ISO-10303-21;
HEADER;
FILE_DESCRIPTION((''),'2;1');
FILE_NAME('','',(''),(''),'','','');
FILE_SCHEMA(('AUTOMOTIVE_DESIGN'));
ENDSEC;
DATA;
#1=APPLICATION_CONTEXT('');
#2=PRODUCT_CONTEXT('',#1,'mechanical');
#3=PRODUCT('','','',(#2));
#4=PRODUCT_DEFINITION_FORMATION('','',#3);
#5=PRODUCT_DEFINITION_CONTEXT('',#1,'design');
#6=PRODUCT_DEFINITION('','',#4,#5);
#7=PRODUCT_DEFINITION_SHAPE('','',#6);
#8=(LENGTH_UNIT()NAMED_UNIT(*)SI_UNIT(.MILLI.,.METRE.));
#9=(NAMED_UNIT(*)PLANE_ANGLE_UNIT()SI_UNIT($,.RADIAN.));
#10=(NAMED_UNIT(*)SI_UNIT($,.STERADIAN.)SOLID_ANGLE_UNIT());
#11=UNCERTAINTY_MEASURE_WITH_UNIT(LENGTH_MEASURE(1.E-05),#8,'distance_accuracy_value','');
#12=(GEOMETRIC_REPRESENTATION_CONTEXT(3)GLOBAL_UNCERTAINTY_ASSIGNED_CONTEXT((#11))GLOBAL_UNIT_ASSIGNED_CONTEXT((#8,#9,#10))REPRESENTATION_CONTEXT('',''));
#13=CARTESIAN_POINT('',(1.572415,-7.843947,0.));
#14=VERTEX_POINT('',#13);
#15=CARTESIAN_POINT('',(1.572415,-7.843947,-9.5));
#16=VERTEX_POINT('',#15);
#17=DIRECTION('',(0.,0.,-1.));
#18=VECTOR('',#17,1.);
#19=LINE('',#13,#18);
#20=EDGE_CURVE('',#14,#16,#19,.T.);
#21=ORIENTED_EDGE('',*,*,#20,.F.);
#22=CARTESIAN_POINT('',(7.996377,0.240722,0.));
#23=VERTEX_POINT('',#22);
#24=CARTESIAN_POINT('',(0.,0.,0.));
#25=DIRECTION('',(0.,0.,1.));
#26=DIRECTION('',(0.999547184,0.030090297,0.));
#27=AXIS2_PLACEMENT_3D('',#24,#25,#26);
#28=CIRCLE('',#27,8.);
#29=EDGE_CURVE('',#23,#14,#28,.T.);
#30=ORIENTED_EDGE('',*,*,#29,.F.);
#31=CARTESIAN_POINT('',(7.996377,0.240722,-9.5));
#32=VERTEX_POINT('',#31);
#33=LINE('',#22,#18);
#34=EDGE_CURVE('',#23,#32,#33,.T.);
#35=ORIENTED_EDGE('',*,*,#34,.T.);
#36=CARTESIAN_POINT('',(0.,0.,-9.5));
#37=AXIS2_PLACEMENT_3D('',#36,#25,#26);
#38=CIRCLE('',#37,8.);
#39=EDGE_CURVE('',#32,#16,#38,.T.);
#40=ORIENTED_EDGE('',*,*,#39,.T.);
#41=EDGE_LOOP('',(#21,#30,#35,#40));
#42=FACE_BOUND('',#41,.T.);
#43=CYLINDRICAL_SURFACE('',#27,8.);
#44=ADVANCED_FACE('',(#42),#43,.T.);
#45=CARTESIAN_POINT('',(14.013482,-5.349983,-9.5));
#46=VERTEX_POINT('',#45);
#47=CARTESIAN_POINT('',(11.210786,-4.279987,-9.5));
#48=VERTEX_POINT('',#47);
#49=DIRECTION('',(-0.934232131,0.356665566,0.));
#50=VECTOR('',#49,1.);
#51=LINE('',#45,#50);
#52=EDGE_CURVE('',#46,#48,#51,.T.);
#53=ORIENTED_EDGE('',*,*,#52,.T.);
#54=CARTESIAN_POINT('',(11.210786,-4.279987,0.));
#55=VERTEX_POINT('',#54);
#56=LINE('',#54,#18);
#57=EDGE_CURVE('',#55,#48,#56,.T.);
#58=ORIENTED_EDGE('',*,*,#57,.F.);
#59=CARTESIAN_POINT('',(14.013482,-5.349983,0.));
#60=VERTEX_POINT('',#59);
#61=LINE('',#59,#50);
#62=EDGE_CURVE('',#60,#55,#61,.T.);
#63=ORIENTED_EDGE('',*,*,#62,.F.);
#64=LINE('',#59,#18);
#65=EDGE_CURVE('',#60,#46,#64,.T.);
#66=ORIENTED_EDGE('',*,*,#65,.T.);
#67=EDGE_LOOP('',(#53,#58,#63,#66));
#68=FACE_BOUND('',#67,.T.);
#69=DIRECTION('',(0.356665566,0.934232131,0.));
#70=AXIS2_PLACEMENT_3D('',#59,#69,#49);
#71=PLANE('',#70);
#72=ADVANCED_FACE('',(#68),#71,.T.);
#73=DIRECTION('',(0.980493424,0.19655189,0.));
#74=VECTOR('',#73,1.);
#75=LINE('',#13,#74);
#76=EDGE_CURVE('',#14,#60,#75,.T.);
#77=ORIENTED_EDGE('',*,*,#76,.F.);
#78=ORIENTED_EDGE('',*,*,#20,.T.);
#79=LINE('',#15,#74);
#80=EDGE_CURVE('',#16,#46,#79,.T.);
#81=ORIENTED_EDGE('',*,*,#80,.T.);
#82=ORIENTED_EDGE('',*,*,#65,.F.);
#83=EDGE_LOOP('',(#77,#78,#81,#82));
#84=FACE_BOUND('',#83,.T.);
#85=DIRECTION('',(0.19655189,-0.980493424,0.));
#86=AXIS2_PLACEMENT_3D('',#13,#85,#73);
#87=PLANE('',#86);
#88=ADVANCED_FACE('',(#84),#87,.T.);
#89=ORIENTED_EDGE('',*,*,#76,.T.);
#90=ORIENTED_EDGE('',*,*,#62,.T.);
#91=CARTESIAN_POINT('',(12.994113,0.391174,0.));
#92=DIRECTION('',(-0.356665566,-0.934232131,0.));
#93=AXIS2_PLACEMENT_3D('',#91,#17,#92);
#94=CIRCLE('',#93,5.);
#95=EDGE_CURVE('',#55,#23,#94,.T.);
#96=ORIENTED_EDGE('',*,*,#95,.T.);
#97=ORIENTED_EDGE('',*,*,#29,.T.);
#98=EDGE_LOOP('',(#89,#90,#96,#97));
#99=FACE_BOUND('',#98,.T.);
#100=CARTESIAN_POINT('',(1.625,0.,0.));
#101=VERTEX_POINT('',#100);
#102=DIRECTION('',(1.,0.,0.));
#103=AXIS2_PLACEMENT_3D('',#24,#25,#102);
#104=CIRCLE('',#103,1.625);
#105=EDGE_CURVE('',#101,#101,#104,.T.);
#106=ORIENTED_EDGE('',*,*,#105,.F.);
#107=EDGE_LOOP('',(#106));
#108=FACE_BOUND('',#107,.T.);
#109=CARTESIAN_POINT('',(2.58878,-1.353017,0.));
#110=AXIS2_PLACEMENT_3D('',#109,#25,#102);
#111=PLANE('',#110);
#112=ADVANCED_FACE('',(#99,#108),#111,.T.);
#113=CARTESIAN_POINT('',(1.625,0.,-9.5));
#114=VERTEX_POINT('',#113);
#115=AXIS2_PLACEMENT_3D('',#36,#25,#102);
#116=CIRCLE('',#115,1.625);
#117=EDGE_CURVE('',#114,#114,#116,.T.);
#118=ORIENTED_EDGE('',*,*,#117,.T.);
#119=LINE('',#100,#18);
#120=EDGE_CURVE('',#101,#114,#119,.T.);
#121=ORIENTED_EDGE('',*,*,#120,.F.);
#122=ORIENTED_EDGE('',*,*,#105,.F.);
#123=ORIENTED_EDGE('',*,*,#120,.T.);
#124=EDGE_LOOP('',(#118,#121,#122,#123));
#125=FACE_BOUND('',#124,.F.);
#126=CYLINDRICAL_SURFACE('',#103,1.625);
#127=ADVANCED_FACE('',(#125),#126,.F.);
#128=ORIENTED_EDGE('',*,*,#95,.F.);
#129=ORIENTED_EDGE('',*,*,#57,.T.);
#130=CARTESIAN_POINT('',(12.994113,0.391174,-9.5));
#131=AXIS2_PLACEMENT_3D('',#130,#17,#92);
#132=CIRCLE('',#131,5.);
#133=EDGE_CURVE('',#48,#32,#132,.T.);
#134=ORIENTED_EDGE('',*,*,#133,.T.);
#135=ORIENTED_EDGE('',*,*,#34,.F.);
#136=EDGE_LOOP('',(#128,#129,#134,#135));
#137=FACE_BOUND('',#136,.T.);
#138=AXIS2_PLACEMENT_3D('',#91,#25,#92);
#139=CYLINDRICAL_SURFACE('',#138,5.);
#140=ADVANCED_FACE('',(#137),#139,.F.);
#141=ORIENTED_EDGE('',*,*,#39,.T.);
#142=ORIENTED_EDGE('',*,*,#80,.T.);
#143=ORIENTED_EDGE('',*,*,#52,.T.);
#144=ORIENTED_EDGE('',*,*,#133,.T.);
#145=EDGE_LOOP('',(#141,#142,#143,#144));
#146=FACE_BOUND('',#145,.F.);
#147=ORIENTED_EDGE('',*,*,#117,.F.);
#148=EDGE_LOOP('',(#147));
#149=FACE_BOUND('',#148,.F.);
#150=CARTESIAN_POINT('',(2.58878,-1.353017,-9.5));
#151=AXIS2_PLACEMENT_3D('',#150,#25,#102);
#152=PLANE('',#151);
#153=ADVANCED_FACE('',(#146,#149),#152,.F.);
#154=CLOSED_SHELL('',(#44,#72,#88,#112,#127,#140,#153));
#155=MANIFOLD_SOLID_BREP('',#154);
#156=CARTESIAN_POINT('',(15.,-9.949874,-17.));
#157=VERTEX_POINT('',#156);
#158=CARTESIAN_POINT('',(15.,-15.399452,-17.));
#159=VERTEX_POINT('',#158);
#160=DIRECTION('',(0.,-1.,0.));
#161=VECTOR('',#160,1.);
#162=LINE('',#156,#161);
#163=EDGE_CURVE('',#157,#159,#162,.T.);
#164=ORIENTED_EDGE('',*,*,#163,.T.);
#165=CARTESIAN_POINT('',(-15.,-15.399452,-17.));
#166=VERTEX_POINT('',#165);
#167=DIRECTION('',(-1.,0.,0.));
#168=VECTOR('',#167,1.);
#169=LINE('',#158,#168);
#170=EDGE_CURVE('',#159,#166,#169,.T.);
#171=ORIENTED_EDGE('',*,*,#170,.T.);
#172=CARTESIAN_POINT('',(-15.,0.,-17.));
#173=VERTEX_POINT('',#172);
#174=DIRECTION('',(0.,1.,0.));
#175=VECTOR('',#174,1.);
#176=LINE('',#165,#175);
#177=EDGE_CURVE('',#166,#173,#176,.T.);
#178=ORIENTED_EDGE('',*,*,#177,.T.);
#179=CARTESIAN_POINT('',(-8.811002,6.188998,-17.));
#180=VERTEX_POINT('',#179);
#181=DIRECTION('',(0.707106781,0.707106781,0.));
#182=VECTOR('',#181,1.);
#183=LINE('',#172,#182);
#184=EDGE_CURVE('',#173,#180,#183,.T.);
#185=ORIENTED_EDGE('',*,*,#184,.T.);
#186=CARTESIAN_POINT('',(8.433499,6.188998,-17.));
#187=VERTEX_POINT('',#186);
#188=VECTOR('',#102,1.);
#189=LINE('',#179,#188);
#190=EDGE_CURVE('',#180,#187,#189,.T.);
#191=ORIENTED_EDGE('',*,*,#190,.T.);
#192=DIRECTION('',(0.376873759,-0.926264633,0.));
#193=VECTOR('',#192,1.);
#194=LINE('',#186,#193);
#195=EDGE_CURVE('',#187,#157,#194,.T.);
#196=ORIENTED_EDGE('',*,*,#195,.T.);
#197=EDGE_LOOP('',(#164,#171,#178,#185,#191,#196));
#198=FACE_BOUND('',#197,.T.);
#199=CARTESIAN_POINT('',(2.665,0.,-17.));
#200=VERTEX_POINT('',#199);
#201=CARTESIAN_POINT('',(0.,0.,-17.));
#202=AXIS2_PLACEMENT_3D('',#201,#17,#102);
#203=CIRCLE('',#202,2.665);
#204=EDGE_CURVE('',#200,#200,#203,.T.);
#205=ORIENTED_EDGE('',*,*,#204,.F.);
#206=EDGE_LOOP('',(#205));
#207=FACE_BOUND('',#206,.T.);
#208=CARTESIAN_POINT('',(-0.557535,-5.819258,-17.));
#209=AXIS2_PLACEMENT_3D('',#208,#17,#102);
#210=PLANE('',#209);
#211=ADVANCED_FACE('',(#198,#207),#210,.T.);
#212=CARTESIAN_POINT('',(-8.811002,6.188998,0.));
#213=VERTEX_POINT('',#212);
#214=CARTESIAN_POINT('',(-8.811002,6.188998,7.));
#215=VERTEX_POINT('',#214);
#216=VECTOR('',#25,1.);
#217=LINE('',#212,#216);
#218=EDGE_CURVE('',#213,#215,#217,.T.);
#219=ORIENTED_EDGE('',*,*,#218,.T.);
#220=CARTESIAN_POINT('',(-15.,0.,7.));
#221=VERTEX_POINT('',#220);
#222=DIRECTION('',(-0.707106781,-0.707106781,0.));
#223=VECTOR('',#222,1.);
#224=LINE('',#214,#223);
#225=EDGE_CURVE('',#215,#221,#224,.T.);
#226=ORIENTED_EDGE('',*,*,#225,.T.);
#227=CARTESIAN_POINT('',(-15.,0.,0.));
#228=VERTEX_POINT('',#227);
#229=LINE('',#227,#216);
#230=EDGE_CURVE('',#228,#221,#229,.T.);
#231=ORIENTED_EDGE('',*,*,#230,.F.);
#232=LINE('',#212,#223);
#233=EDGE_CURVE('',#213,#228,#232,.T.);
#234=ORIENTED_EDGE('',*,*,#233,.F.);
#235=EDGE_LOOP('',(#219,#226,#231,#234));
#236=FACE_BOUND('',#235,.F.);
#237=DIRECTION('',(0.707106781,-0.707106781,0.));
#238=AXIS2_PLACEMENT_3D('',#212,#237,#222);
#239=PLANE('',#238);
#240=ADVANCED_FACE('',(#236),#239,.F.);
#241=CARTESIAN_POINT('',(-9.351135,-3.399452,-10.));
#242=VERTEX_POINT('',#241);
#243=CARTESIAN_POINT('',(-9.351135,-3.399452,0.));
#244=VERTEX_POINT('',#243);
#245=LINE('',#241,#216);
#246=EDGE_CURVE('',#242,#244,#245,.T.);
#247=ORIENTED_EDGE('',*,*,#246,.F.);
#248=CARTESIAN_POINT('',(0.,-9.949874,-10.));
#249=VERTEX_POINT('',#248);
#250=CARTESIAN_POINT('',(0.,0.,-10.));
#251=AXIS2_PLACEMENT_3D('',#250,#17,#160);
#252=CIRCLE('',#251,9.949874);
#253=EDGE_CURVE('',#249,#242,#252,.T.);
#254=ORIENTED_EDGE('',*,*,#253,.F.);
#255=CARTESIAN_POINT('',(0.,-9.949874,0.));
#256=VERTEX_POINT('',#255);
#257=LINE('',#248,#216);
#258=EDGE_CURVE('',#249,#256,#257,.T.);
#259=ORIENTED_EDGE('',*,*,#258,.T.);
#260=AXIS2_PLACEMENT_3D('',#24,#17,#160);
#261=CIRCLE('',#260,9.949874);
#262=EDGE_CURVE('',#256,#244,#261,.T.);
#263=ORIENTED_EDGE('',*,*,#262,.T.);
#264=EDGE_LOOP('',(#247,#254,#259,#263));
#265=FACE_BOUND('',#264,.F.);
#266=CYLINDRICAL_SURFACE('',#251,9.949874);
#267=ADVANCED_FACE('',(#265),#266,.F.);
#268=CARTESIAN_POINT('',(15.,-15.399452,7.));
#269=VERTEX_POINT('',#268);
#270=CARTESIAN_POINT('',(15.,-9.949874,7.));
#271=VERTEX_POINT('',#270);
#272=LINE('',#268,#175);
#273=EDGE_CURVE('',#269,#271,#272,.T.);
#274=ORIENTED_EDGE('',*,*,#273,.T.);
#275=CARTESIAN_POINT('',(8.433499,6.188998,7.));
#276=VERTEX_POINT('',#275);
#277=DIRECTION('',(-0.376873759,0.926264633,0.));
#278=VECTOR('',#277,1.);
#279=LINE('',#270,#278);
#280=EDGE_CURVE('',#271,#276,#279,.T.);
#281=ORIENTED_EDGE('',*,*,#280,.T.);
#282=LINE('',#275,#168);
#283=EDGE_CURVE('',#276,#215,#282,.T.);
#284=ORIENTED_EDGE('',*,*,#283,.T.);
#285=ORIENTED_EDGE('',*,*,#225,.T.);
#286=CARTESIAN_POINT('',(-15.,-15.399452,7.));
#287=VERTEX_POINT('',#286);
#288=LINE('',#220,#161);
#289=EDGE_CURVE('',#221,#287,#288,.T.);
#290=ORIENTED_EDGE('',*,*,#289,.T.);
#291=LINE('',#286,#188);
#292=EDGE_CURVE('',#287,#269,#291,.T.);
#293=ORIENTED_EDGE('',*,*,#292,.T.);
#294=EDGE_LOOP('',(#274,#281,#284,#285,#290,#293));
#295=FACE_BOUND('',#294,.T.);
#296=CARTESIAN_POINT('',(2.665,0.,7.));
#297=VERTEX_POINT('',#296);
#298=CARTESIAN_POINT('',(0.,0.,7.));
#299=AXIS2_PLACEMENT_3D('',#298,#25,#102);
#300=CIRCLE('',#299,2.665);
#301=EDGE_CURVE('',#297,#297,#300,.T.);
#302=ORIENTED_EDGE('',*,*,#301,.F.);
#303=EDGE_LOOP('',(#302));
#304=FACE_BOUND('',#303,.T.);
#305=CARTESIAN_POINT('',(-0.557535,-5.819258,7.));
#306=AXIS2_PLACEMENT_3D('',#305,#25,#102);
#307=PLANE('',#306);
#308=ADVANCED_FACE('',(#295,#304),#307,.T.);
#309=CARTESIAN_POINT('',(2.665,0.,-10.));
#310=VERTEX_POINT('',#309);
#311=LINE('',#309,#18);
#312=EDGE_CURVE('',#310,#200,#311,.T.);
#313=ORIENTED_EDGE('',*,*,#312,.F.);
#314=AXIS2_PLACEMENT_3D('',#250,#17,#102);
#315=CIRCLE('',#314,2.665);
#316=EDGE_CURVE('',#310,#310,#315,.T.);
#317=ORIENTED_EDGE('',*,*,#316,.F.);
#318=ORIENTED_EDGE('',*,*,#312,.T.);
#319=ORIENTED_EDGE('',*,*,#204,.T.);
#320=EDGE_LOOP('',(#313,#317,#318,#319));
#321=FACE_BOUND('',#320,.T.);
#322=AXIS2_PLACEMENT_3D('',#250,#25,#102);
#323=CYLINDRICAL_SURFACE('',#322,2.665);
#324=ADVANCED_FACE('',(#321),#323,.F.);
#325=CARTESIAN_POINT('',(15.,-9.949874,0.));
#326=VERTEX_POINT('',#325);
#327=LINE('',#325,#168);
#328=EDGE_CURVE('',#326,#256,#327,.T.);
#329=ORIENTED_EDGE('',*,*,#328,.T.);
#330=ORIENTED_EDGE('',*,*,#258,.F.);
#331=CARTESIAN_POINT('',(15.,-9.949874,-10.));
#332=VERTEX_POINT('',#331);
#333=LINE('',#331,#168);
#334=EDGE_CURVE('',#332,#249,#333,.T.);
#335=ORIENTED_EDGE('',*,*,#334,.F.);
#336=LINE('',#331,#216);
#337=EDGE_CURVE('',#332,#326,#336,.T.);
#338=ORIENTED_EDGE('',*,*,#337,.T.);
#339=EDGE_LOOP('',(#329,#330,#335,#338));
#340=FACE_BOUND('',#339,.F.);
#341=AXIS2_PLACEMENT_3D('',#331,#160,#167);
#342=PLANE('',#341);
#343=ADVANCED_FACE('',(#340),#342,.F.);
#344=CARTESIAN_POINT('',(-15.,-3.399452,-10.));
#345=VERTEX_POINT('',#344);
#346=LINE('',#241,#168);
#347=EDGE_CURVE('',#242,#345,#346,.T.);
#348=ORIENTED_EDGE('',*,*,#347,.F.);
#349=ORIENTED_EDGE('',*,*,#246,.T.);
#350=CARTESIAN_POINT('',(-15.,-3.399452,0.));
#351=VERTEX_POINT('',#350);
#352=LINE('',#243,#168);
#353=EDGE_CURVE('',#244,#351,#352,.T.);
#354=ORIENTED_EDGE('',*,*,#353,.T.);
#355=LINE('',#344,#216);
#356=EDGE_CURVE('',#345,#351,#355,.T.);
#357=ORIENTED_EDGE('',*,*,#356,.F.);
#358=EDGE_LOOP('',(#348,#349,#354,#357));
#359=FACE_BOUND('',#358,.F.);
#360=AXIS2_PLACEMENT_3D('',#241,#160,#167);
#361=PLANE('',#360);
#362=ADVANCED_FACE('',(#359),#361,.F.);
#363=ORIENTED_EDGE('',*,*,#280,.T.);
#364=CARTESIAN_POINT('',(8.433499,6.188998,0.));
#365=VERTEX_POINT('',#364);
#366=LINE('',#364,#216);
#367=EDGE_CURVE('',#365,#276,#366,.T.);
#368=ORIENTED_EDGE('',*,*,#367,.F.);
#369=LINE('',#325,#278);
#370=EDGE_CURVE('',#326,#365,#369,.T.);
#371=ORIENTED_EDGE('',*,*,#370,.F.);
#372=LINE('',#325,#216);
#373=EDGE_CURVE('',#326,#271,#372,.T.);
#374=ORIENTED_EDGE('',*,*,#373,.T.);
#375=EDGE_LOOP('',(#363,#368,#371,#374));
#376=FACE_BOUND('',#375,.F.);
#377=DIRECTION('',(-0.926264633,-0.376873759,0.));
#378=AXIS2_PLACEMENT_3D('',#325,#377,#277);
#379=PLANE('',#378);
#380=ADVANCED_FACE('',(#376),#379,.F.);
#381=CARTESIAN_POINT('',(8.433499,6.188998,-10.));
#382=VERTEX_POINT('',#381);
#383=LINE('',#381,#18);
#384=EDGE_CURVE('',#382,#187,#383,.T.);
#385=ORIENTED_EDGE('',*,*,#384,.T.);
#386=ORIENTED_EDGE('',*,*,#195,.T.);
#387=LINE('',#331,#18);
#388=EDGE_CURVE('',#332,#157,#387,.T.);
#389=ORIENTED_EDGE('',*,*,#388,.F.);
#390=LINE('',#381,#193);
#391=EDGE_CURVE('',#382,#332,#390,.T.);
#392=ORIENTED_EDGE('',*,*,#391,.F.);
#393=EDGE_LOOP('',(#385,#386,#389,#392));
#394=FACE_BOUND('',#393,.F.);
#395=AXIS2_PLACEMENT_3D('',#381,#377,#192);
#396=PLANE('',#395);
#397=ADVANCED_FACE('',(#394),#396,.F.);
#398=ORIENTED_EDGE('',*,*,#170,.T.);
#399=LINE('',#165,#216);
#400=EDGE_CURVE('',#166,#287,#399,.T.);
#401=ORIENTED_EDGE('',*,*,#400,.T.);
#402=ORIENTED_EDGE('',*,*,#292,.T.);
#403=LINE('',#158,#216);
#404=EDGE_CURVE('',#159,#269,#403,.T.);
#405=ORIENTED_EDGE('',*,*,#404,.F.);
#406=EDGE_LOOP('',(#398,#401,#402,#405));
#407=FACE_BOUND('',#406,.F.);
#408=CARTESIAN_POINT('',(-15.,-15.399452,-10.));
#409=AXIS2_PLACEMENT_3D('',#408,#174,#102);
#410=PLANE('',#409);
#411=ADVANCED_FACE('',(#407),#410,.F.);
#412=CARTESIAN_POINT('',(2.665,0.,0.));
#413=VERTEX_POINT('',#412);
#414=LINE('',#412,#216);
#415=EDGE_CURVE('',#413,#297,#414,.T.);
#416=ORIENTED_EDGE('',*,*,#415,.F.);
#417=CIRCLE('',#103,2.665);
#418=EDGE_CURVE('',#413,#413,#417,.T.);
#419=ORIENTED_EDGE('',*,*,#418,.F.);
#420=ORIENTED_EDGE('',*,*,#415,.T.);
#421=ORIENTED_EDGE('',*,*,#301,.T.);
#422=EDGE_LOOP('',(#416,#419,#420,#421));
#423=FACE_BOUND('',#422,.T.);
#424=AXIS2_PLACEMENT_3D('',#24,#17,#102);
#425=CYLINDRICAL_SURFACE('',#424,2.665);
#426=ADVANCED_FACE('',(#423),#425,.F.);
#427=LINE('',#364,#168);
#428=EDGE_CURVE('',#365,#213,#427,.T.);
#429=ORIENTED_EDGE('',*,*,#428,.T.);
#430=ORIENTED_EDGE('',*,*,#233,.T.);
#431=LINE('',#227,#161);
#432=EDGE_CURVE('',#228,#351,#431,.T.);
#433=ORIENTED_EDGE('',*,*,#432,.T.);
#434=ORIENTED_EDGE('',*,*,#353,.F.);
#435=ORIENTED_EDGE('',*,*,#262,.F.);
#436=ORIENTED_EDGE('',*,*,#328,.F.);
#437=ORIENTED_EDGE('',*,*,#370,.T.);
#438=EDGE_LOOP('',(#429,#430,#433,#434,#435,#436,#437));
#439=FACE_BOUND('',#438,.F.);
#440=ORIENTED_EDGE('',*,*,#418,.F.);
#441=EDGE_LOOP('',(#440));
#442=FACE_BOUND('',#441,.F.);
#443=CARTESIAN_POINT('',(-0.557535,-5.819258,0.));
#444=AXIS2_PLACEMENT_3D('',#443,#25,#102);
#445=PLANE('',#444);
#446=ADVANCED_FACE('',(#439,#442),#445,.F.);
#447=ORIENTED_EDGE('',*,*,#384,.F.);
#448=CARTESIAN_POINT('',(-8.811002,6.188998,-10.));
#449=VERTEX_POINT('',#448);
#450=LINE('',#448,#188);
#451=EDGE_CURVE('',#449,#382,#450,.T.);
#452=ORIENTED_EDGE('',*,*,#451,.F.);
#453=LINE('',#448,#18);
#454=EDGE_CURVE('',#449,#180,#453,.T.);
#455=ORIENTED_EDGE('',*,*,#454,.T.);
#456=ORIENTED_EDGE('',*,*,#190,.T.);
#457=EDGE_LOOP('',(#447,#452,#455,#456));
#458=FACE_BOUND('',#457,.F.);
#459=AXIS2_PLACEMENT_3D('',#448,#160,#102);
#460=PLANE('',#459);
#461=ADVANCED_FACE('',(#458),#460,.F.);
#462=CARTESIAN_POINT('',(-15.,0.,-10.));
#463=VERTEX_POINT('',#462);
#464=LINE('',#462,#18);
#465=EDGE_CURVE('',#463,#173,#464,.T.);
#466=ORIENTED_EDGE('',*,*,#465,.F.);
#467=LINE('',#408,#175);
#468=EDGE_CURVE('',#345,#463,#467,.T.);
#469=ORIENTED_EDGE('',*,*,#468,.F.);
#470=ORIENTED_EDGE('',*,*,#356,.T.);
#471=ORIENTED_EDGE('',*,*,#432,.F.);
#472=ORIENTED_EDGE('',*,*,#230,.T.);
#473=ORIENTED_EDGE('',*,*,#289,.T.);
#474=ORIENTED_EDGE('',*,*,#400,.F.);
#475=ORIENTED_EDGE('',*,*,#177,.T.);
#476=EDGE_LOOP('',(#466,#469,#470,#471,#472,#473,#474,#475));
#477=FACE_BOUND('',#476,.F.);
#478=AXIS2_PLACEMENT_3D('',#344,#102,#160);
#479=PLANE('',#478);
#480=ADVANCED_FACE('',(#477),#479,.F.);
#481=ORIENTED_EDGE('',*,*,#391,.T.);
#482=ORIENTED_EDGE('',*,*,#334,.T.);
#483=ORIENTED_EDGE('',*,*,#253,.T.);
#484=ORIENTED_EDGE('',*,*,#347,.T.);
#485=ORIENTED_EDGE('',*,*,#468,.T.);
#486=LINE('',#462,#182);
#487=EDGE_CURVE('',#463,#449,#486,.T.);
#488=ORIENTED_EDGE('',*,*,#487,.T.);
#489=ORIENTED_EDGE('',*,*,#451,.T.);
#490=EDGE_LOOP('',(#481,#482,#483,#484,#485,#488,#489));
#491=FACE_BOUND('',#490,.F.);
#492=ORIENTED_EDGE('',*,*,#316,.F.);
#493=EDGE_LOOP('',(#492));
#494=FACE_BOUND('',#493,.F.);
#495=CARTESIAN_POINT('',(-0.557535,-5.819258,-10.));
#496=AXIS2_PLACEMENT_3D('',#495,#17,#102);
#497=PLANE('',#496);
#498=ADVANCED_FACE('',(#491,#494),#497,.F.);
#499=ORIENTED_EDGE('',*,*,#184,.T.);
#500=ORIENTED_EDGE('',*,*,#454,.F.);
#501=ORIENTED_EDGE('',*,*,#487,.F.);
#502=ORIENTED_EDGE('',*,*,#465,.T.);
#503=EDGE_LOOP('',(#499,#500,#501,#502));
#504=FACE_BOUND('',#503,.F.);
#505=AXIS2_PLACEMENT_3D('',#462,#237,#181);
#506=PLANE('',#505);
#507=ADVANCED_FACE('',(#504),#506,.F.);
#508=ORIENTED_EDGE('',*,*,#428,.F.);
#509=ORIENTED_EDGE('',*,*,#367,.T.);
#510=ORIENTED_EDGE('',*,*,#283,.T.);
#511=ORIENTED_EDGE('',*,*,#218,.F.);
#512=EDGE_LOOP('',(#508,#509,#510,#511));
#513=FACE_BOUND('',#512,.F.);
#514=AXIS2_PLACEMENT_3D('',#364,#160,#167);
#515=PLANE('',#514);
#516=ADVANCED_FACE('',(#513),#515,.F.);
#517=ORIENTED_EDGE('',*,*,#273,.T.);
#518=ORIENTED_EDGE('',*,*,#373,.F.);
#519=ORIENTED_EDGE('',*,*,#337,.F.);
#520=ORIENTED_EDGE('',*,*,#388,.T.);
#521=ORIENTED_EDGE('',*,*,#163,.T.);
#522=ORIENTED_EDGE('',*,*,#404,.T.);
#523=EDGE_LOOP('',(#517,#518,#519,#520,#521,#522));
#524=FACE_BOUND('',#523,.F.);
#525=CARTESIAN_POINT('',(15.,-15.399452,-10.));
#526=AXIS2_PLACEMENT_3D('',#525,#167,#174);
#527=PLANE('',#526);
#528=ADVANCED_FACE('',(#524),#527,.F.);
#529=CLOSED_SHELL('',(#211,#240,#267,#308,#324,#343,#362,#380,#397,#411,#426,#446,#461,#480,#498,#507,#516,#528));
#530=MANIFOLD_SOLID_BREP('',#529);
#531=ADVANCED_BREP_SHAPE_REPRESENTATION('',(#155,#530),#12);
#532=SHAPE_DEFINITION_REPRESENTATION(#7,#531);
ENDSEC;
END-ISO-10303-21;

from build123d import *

# Parameters (mm, degrees)
F1_R      = 4.2
F1_R_2    = 2.665
F3_DEPTH  = 7
F5_R      = 2.665
F6_DEPTH  = 7
F2_R      = 1.625
F7_DEPTH  = 9.5
F10_DEPTH = 10


# Not quite as in the source:
# - the program builds the solid bodies; features that only make, move or delete a surface that nothing else refers to are left out


with BuildPart() as f3:
    # F1 (on Top) → F3 (new body)
    with BuildSketch(Plane.XY):
        Polygon((-8.8110024968, 6.1889975032), (-15, 0), (-15, -15.3994522989), (15, -15.3994522989), (15, -9.9498743711), (8.4334993606, 6.1889975032), align=None)
        Circle(F1_R, mode=Mode.SUBTRACT)
        Circle(F1_R)
        Circle(F1_R_2, mode=Mode.SUBTRACT)
    extrude(amount=F3_DEPTH)



with BuildPart() as f6:
    # F5 (on offset) → F6 (new body)
    with BuildSketch(Plane(origin=(0, 0, -10), x_dir=(1, 0, 0), z_dir=(0, 0, -1))):
        Polygon((-15, 0), (-8.8110024968, -6.1889975032), (8.4334993606, -6.1889975032), (15, 9.9498743711), (15, 15.3994522989), (-15, 15.3994522989), align=None)
        Circle(F5_R, mode=Mode.SUBTRACT)
    extrude(amount=F6_DEPTH)


with BuildPart() as f7:
    # F2 (on Top) → F7 (new body)
    with BuildSketch(Plane.XY):
        with BuildLine():
            Line((1.5724151216, -7.8439473918), (14.0134819596, -5.3499834923))
            Line((14.0134819596, -5.3499834923), (11.2107855677, -4.2799867939))
            ThreePointArc((11.2107855677, -4.2799867939), (8.919201221, -2.5062544394), (7.996377476, 0.240722375))
            ThreePointArc((7.996377476, 0.240722375), (-6.2634590486, 4.9768545033), (1.5724151216, -7.8439473918))
        make_face()
        Circle(F2_R, mode=Mode.SUBTRACT)
    extrude(amount=-F7_DEPTH)


with BuildPart() as f3_1:
    add(f3.part)

    add(f6.part)  # F10 merges F6
    # F9 (on face) → F10 (join, through all)
    with BuildSketch(Plane.XY.offset(-10)):
        with BuildLine():
            Line((-9.351134908, -3.3994522989), (-15, -3.3994522989))
            Line((-15, -3.3994522989), (-15, -15.3994522989))
            Line((-15, -15.3994522989), (15, -15.3994522989))
            Line((15, -15.3994522989), (15, -9.9498743711))
            Line((15, -9.9498743711), (0, -9.9498743711))
            ThreePointArc((0, -9.9498743711), (-5.7085846186, -8.1493595854), (-9.351134908, -3.3994522989))
        make_face()
    extrude(amount=F10_DEPTH)


solid = Compound([f7.part, f3_1.part])
